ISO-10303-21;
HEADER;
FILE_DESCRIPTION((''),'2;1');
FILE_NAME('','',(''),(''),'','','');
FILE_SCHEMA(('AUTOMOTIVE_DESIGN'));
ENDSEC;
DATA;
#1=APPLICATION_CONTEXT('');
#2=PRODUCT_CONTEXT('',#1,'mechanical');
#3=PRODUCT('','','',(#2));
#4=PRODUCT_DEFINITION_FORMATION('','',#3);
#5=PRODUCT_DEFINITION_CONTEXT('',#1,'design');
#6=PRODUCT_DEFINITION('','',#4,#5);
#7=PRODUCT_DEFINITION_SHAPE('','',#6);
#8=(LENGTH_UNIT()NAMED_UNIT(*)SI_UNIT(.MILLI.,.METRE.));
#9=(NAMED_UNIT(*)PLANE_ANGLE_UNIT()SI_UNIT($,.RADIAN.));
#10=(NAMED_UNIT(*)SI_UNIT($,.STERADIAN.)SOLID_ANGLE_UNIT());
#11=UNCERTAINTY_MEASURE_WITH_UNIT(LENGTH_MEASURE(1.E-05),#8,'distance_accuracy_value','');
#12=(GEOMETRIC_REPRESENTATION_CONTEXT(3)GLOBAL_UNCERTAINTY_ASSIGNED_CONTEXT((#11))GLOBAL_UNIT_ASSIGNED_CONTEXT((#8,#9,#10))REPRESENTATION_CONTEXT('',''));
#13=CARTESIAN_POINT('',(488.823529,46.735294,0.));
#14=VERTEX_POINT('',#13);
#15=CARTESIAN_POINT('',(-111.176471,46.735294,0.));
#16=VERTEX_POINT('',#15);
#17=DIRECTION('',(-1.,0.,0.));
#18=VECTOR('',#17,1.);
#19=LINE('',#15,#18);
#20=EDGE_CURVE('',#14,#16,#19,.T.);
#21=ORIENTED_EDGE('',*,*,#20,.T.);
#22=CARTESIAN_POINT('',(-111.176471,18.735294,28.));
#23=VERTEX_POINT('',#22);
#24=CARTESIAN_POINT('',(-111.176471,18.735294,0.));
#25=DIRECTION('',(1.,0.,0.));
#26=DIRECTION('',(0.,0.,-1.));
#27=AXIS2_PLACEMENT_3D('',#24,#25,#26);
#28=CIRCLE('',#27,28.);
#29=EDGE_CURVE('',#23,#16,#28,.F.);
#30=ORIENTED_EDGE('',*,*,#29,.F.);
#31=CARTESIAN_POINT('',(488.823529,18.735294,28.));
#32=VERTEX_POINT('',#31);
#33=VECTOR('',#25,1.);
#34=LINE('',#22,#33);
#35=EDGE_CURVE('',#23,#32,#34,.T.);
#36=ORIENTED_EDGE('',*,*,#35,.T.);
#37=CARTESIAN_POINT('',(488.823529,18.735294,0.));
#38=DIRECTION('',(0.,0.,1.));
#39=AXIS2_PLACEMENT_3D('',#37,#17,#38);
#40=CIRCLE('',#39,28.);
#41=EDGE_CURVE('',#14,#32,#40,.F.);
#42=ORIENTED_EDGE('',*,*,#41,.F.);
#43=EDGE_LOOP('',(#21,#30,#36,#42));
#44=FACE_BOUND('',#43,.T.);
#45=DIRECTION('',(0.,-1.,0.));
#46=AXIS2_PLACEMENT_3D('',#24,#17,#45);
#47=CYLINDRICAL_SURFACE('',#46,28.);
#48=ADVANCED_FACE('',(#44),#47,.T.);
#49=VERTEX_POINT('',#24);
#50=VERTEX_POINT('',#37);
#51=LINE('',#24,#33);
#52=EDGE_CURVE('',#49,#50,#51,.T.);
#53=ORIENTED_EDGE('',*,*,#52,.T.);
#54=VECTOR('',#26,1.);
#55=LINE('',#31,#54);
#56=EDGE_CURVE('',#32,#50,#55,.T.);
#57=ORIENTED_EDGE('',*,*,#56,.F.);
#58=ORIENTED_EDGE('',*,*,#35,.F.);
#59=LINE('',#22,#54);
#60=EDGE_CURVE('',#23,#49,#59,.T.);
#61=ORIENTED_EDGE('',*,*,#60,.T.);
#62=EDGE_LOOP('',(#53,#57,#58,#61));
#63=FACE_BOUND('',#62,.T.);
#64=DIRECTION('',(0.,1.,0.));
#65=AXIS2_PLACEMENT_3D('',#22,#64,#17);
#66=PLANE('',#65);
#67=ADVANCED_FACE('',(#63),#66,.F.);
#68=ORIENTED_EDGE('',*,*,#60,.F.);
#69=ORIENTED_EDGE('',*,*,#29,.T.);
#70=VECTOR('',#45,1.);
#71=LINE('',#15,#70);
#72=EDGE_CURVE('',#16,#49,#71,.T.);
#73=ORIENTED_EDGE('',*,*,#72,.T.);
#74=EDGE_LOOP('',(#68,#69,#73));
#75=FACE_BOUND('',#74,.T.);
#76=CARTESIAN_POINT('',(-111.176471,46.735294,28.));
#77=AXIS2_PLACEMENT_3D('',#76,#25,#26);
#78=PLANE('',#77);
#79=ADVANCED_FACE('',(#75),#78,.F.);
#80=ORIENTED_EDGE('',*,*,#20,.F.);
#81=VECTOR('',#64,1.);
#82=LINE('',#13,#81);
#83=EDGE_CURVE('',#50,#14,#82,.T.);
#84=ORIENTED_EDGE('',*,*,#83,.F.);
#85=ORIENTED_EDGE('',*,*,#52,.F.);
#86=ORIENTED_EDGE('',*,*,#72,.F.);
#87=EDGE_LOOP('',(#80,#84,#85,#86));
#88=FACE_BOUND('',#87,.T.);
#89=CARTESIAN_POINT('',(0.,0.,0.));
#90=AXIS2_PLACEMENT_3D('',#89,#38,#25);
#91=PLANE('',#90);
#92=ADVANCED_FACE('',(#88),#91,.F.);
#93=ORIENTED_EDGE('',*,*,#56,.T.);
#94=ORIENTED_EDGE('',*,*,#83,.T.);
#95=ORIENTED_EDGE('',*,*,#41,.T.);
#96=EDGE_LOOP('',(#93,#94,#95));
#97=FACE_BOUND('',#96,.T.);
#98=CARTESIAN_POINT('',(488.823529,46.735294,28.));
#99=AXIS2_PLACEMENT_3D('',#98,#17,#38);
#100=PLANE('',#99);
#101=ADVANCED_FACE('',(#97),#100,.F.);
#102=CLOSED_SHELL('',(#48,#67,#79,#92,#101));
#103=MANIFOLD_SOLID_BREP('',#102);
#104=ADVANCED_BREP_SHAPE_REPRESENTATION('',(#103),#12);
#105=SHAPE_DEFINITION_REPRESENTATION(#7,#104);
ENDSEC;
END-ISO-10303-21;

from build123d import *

# Parameters (mm, degrees)
ESQUISSE1_W        = 600
ESQUISSE1_H        = 28
BOSS_EXTRU_1_DEPTH = 28
CONG_1_R           = 28


with BuildPart() as part:
    # Esquisse1 → Boss.-Extru.1 (new body)
    with BuildSketch(Plane.XY):
        with Locations((188.823529412, 32.735294118)):
            Rectangle(ESQUISSE1_W, ESQUISSE1_H)
    extrude(amount=BOSS_EXTRU_1_DEPTH)

    # Congé1
    cong_1_edges = [part.edges().sort_by_distance(p)[0] for p in [
        (188.823529412, 46.735294118, 28),
    ]]
    fillet(cong_1_edges, radius=CONG_1_R - 0.0001)  # a hair under: the kernel refuses the full size


solid = part.part
